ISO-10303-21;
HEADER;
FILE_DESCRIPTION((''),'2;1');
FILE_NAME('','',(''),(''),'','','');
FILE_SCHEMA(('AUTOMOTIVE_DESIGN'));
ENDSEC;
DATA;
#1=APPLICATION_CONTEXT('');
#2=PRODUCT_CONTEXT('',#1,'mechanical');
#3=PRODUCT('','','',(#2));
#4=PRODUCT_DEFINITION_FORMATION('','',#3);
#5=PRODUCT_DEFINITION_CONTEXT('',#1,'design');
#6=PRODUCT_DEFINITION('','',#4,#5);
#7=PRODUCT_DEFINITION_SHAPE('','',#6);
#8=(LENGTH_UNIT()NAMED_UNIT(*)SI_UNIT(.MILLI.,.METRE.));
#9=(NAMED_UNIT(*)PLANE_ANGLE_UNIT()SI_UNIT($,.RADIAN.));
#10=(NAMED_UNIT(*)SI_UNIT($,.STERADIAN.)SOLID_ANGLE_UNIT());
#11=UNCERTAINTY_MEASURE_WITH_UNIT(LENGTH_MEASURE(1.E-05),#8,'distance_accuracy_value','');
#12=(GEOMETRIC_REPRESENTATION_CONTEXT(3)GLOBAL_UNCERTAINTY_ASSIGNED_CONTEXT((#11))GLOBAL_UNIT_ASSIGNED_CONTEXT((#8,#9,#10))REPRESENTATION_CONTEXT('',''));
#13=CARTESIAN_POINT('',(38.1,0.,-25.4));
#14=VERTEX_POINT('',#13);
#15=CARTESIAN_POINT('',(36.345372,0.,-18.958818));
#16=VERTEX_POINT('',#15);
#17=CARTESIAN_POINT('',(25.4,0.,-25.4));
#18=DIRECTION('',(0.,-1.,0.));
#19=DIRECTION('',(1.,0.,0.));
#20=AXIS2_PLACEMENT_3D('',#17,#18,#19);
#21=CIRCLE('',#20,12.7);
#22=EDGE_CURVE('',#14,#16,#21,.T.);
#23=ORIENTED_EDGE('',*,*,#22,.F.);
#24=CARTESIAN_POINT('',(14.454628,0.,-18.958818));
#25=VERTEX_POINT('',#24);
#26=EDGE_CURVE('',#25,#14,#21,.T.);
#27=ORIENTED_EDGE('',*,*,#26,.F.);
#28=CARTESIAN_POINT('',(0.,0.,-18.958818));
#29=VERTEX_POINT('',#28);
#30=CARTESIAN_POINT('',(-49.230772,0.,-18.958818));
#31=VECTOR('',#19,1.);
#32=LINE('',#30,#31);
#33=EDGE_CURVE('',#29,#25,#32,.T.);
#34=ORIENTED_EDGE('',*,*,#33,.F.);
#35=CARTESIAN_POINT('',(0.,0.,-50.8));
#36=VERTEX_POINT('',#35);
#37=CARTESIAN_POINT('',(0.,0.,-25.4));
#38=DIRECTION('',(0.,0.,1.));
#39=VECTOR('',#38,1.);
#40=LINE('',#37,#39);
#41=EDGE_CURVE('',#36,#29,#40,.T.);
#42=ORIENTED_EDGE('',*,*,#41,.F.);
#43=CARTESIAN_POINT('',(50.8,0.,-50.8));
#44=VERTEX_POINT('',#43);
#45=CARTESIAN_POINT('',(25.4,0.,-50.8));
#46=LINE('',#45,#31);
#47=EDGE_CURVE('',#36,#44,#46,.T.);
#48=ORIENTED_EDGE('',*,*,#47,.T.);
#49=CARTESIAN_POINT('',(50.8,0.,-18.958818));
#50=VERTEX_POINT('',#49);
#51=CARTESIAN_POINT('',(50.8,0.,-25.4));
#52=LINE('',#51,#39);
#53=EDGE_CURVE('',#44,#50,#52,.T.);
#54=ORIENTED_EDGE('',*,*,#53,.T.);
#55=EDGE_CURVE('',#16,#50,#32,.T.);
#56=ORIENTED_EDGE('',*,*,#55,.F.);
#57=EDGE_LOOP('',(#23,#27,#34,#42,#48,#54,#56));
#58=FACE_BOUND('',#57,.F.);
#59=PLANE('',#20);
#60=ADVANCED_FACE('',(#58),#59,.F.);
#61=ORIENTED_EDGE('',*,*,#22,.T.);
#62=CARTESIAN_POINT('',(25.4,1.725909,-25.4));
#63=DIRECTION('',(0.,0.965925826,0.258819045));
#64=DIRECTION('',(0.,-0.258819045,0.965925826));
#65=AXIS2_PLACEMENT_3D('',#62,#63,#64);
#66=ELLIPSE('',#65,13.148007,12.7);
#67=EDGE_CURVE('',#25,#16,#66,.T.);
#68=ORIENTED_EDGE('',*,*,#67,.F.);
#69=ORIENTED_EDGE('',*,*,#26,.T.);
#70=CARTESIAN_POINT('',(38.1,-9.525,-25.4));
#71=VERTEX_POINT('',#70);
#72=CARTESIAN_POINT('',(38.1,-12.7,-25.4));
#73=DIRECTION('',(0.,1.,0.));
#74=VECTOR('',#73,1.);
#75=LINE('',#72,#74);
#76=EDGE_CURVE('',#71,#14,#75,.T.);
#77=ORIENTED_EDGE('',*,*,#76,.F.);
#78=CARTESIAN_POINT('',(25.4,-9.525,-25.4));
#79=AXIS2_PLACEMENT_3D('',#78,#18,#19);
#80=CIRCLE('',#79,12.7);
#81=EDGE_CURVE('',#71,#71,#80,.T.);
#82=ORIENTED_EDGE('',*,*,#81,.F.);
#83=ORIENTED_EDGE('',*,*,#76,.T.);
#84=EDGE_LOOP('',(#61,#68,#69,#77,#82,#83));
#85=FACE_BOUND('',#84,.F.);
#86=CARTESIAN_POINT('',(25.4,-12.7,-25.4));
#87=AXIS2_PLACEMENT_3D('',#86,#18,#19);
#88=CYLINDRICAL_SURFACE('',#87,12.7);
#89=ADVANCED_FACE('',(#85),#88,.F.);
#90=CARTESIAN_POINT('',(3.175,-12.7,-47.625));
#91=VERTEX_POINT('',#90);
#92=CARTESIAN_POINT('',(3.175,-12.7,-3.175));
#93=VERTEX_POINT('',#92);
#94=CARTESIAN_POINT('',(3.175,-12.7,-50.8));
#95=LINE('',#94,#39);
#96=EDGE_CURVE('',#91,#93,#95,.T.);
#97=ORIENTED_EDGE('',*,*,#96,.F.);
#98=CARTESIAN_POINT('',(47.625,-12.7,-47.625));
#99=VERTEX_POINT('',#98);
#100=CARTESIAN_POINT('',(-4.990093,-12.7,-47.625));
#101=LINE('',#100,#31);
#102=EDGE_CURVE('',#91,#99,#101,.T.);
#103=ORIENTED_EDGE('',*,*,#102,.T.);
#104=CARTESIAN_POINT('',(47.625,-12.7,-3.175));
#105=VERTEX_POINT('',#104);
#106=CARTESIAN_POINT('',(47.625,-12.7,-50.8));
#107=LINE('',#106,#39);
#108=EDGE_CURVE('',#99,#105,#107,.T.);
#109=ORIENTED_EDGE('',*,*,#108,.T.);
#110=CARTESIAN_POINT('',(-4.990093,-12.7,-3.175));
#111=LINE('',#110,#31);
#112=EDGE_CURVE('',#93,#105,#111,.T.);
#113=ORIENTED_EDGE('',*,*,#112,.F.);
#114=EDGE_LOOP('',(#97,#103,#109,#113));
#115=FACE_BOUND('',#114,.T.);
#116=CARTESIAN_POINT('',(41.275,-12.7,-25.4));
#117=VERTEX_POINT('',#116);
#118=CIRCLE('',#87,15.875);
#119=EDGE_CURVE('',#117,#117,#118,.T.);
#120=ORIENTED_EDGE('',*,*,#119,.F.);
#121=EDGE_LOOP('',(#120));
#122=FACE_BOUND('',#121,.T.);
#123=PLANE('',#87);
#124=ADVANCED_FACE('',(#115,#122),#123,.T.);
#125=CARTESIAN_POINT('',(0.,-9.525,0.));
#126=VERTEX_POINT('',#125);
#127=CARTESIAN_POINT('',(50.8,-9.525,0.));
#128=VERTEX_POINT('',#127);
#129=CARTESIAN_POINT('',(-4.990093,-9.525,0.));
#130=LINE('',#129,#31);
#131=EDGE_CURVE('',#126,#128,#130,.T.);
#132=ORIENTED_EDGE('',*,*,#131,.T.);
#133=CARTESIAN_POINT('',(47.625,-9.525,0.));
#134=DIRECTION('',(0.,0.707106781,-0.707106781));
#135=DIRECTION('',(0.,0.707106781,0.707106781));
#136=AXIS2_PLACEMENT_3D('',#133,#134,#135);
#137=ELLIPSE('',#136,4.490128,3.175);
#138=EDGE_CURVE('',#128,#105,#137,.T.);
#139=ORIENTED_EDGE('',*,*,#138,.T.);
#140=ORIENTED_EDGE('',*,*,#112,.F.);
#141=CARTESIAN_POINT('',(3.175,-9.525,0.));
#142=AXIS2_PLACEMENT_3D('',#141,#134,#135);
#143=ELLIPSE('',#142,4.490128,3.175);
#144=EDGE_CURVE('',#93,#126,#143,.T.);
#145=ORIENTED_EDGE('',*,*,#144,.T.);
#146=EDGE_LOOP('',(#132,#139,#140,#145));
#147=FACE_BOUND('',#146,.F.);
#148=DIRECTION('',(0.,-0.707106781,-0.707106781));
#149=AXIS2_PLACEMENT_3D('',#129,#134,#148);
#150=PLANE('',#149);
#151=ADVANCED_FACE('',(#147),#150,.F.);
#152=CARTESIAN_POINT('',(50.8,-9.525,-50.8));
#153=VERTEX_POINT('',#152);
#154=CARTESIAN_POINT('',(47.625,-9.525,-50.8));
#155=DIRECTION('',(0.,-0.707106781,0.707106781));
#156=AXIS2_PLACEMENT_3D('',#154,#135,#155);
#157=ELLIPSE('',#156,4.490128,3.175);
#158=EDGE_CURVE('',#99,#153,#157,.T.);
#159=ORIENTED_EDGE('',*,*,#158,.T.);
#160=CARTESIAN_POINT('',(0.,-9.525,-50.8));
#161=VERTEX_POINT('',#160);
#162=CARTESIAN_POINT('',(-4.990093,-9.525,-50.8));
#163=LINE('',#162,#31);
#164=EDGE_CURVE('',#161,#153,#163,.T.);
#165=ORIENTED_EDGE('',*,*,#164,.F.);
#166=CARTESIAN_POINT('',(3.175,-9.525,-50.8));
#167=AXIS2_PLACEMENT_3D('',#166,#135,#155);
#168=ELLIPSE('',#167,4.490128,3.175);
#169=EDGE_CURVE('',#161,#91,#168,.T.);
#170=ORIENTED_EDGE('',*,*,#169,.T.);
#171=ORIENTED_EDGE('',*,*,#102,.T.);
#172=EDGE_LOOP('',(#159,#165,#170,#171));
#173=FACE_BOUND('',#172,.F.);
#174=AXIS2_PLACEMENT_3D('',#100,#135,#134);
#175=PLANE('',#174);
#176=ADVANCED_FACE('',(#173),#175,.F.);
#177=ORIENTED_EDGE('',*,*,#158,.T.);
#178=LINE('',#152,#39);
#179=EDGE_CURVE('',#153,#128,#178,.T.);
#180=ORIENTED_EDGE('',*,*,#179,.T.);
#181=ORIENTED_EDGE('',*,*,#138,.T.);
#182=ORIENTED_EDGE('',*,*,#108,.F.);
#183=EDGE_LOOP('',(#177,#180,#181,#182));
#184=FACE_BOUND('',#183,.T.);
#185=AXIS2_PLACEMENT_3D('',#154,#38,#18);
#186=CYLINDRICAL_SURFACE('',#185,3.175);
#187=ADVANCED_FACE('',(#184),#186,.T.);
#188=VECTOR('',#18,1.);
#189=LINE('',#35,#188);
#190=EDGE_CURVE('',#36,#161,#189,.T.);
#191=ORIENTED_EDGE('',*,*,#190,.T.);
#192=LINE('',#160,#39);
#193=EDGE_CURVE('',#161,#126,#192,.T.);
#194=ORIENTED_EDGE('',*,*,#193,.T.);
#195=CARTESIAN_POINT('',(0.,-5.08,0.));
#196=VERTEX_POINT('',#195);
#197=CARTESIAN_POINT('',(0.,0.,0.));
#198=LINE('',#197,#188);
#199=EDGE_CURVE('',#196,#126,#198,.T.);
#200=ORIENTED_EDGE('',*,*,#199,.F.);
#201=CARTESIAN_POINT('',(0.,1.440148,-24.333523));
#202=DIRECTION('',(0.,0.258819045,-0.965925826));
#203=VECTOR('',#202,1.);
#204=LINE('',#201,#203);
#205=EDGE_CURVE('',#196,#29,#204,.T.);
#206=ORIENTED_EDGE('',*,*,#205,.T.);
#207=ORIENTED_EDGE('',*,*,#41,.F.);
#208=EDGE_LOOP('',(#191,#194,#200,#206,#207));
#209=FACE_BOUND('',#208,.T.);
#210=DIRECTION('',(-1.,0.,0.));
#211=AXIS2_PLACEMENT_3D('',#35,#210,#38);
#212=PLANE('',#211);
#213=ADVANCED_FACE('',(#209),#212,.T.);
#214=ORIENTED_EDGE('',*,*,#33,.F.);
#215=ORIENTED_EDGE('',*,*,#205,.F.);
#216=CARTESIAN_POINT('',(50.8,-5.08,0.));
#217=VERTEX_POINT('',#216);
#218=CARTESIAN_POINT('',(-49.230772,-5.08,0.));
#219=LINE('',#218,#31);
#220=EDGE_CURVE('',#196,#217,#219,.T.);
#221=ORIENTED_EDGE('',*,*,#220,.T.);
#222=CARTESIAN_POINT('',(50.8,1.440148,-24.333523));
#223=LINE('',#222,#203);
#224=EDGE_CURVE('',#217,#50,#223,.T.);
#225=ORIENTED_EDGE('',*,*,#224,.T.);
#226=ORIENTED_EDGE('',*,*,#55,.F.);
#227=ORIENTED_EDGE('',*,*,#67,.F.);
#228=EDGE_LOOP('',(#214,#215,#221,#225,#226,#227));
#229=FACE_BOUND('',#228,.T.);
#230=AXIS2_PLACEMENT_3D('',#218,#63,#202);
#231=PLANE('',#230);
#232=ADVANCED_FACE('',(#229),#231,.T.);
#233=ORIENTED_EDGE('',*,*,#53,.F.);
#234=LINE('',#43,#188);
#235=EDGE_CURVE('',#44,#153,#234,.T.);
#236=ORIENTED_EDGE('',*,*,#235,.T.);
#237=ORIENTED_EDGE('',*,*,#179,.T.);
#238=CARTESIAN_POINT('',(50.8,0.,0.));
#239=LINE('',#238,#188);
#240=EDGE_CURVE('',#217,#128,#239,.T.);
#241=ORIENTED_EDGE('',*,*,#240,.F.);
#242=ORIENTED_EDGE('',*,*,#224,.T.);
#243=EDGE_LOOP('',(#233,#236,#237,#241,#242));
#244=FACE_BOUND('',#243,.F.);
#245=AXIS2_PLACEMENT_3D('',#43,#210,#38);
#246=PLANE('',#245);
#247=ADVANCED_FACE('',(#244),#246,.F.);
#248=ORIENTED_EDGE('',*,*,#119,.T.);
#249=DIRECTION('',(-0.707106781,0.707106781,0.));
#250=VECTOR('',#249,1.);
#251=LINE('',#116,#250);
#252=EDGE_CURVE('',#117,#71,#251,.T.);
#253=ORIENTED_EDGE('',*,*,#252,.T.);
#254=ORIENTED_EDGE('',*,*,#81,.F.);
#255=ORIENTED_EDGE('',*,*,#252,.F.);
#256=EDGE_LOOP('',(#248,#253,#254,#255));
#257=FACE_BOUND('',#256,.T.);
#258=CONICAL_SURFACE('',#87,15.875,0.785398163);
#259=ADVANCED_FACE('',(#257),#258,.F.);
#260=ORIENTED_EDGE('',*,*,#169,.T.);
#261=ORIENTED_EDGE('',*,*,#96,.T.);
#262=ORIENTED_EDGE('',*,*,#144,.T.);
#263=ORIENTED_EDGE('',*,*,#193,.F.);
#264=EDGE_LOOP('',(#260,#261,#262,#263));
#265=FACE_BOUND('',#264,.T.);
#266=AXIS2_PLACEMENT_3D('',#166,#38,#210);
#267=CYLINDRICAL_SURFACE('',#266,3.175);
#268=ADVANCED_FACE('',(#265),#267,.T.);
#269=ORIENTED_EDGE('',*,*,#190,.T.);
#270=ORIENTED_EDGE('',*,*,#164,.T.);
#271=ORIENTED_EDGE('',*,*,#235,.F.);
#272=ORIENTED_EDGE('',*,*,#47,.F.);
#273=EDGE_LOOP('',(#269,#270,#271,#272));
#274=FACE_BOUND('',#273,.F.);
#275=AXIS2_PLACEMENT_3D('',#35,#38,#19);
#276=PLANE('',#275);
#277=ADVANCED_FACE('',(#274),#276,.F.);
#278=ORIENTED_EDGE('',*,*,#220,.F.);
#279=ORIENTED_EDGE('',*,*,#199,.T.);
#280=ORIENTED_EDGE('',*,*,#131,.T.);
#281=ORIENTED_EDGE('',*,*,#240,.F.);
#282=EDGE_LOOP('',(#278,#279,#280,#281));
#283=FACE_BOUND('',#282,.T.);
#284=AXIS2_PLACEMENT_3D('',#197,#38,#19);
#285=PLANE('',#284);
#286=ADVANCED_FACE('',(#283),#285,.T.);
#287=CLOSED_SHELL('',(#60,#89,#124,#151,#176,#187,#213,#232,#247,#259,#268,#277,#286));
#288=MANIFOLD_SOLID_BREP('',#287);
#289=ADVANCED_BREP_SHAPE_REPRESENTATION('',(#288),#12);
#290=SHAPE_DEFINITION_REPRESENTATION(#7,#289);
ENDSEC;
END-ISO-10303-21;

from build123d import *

# Parameters (mm, degrees)
F0_W        = 50.8
F0_H        = 50.8
F1_DEPTH    = 12.7
F2_R        = 12.7
F3_DEPTH    = 25.4
F4_R        = 3.175
F5_T1_DEPTH = 60.7801869736
F6_T1_DEPTH = 149.2615438243


# Not quite as in the source:
# - a fillet or chamfer that OpenCascade refuses, or shapes differently, is made with other operations: its cross-section is extruded or revolved along the edge and cut away or added


with BuildPart() as f1:
    # F0 (on Front) → F1 (new body)
    with BuildSketch(Plane.XZ):
        with Locations((25.4, -25.4)):
            Rectangle(F0_W, F0_H)
    extrude(amount=F1_DEPTH)

    # F2 (on face) → F3 (cut)
    with BuildSketch(Plane.XZ.offset(12.7)):
        with Locations((25.4, -25.4)):
            Circle(F2_R)
    extrude(amount=-F3_DEPTH, mode=Mode.SUBTRACT)

    # F4
    f4_edges = [f1.edges().sort_by_distance(p)[0] for p in [
        (0, -12.7, -25.4),
        (50.8, -12.7, -25.4),
    ]]
    fillet(f4_edges, radius=F4_R)

    # F5: chamfer of 3.175 on 3 edges, made by hand

    # F5_s2 → F5_t1 (cut)
    with BuildSketch(Plane.YZ.offset(-4.9900934868)):
        Polygon((-9.525, 0), (-12.7, -3.175), (-12.7, 0), align=None)
        Polygon((-12.7, -47.625), (-9.525, -50.8), (-12.7, -50.8), align=None)
    extrude(amount=F5_T1_DEPTH, mode=Mode.SUBTRACT)

    # F5_s3 → F5_t4 (revolve, cut)
    with BuildSketch(Plane.XY.offset(-25.4)):
        Polygon((41.275, -12.7), (38.1, -9.525), (38.1, -12.7), align=None)
    revolve(axis=Axis((25.4, -12.7, -25.4), (0, -1, 0)), mode=Mode.SUBTRACT)

    # F6: chamfer of 5.08 x 18.9588181024 on 1 edges, made by hand

    # F6_s2 → F6_t1 (cut)
    with BuildSketch(Plane.YZ.offset(-49.2307719121)):
        Polygon((-5.08, 0), (0, -18.9588181024), (0, 0), align=None)
    extrude(amount=F6_T1_DEPTH, mode=Mode.SUBTRACT)


solid = f1.part
